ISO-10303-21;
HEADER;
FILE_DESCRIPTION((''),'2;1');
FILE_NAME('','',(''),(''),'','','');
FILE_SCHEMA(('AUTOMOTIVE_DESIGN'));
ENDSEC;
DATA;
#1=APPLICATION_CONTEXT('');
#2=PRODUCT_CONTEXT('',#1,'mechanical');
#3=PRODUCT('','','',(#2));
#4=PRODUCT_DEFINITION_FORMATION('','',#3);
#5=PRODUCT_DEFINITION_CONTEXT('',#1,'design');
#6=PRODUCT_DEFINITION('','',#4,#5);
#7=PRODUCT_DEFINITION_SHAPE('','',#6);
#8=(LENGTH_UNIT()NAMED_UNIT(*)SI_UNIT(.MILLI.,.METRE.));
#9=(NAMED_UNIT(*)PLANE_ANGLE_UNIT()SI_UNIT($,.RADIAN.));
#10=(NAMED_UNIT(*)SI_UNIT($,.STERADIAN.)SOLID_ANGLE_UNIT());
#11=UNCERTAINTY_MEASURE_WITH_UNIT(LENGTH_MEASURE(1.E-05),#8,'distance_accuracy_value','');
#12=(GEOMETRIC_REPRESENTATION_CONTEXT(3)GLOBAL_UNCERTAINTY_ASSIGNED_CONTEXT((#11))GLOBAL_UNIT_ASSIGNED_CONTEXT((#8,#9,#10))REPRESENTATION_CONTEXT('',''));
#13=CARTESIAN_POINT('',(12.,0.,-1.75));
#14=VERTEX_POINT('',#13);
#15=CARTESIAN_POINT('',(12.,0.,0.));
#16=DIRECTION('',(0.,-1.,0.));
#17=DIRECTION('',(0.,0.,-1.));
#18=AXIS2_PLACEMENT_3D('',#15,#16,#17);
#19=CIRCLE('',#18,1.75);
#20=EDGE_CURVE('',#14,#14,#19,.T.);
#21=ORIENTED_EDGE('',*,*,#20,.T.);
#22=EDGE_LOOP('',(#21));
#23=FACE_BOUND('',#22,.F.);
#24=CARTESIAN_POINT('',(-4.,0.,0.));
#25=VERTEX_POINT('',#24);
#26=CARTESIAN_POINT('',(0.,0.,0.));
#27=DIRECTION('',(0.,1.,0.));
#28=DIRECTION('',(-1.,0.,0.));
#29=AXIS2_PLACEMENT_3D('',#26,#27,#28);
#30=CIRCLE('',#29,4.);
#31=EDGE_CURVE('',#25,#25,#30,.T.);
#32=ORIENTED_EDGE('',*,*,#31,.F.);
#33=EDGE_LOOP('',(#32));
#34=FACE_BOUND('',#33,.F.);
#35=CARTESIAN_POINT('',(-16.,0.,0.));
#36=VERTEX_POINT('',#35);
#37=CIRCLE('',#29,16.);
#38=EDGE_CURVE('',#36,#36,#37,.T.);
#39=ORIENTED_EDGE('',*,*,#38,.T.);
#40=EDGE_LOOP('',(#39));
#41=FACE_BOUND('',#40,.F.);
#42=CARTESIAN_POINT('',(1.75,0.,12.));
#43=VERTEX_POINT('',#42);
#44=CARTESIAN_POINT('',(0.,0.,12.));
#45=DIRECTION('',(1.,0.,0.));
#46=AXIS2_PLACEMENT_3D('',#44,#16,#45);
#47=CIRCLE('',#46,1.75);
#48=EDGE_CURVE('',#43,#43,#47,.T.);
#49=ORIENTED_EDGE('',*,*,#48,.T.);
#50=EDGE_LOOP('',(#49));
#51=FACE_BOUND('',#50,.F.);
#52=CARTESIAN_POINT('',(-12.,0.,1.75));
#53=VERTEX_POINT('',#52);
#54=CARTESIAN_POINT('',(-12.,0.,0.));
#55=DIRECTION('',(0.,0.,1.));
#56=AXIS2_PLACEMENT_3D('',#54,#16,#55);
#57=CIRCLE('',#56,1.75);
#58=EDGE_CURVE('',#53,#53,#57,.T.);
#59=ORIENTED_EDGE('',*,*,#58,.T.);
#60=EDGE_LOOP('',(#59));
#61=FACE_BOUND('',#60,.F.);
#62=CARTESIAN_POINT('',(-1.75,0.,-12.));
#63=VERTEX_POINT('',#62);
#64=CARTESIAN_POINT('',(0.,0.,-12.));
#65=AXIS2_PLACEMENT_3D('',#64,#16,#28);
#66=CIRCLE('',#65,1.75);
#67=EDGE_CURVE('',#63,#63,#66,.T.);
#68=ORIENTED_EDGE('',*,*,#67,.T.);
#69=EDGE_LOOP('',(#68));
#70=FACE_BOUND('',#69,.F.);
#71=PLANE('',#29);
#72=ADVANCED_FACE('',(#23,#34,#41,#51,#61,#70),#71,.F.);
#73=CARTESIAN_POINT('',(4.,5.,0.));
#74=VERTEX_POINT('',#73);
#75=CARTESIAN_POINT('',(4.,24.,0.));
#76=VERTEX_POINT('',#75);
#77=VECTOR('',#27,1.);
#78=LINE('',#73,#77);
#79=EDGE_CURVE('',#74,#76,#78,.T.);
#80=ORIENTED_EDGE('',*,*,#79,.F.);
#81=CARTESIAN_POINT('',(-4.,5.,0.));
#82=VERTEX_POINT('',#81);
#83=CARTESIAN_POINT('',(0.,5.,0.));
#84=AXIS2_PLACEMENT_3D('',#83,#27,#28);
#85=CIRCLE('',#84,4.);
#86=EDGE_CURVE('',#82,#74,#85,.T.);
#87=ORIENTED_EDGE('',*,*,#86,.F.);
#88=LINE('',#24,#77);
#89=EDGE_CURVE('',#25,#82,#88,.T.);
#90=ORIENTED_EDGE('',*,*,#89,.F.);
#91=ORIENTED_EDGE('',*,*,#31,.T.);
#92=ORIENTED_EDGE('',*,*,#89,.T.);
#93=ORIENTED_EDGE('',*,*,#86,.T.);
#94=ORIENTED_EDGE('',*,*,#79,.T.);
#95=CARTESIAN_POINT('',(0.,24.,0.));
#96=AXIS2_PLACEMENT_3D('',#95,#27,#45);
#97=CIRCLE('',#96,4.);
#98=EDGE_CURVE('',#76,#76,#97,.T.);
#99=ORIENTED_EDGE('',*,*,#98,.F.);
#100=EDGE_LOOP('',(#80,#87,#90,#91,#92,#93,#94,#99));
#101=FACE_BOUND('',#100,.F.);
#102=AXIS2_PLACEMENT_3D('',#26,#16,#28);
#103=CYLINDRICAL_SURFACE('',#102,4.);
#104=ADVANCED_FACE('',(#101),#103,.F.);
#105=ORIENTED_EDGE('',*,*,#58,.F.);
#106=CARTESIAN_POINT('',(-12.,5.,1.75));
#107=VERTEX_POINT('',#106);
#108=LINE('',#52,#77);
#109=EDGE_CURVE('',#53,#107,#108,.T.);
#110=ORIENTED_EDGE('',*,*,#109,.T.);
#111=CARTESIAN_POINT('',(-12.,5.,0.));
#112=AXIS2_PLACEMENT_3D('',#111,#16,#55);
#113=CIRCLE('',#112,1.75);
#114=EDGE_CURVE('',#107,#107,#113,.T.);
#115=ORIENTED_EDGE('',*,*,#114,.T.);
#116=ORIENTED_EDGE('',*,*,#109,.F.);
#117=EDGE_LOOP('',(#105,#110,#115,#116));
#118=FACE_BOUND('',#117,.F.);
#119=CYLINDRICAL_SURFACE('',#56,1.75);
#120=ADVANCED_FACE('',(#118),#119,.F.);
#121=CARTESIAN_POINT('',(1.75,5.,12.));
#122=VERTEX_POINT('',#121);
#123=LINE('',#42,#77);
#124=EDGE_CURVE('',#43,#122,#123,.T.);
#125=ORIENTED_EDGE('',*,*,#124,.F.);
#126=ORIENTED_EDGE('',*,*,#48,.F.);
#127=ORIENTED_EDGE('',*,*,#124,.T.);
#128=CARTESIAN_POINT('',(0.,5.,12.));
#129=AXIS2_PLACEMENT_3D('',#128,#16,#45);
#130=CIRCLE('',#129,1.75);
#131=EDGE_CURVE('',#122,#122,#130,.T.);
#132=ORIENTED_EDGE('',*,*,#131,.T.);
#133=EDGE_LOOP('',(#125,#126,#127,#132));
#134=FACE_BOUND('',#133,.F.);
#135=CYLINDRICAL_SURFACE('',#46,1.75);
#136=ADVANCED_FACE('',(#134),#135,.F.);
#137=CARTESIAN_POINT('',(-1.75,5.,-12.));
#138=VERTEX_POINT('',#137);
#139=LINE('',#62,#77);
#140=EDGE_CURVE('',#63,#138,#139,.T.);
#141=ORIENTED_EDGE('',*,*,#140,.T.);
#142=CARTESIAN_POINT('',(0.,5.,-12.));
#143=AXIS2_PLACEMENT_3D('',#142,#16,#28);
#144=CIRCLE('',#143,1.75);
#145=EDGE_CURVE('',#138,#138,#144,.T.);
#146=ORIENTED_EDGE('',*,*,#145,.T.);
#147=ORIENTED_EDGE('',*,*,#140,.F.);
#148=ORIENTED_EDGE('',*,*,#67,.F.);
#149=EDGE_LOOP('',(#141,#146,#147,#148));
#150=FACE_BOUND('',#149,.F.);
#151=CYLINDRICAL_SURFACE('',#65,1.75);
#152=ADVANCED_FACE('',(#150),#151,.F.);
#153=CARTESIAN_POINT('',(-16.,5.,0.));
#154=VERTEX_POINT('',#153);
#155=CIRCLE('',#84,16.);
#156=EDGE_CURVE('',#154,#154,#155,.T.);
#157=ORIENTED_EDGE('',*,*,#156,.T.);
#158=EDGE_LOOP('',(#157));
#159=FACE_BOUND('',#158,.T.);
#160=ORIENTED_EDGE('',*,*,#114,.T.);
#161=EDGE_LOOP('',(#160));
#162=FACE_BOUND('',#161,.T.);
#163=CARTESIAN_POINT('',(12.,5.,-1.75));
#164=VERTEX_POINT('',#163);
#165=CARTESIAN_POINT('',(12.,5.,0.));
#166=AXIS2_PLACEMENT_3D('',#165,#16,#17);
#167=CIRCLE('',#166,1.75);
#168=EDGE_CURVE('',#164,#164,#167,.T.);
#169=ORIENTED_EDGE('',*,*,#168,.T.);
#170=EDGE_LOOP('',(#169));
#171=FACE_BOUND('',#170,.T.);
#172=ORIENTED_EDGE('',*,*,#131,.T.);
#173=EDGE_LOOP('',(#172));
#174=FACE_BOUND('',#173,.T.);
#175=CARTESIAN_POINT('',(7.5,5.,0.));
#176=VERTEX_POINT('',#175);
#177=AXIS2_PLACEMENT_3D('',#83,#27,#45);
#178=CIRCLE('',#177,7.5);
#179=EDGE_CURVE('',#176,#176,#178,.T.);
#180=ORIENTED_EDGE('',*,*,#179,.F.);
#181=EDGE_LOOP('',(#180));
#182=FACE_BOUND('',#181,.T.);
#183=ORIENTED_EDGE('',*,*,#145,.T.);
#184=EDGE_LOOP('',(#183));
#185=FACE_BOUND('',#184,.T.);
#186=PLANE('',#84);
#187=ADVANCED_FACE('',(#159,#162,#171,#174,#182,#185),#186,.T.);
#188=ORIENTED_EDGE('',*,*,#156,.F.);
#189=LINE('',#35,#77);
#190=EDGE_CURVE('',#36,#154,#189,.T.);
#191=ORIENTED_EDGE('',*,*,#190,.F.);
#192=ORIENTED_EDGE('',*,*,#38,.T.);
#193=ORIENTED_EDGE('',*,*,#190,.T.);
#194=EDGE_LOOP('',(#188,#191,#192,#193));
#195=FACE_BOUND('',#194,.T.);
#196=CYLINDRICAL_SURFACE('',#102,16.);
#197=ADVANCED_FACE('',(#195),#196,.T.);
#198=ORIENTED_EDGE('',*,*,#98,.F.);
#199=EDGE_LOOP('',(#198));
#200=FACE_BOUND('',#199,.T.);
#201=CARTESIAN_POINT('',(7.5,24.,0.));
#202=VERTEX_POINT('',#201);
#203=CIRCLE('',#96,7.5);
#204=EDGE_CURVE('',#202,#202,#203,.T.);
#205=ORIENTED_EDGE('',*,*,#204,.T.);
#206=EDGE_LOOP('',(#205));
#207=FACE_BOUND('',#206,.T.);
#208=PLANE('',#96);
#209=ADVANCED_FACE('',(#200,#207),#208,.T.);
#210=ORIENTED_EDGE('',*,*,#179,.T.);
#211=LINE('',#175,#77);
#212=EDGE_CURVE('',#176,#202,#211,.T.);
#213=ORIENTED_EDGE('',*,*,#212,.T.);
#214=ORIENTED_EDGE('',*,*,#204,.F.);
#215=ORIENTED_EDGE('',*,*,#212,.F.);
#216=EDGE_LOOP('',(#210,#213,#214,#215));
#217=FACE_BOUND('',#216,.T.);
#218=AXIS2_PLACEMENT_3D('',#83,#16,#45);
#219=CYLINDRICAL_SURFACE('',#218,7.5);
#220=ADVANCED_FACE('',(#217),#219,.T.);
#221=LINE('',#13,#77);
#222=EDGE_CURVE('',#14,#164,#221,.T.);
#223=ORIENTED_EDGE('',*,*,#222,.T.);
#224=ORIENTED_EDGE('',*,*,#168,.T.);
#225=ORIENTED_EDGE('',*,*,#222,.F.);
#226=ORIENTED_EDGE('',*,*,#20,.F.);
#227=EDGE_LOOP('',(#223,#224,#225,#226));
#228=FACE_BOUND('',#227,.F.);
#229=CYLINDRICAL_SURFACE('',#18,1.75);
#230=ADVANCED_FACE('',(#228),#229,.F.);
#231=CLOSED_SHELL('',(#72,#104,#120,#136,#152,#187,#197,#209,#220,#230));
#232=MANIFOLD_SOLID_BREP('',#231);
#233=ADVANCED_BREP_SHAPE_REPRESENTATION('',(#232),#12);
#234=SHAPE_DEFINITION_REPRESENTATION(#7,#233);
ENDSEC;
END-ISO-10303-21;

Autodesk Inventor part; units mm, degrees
ref_plane "YZ Plane" through (0, 0, 0) normal (1, 0, 0) x (0, 1, 0)
ref_plane "XZ Plane" through (0, 0, 0) normal (0, 1, 0) x (-1, 0, 0)
ref_plane "XY Plane" through (0, 0, 0) normal (0, 0, 1) x (1, 0, 0)
sketch "Sketch1" plane through (0, 0, 0) normal (0, 1, 0) x (-1, 0, 0)
  circle A0 centre (0, 0) radius 4
  circle A1 centre (0, 0) radius 16
  dimension "d0" = 8
  dimension "d1" = 32
extrude "Extrusion1" add sketch "Sketch1" along normal blind 5
sketch "Sketch2" plane through (0, 5, 0) normal (0, 1, 0) x (1, 0, 0)
  circle A0 centre (0, 0) radius 4
  circle A1 centre (0, 0) radius 7.5
  dimension "d4" = 15
extrude "Extrusion2" add sketch "Sketch2" along normal blind 19
sketch "Sketch3" plane through (0, 0, 0) normal (0, -1, 0) x (1, 0, 0)
  point P0 (0, 0)
sketch "Sketch4" plane through (0, 0, 0) normal (0, -1, 0) x (1, 0, 0)
  circle A0 centre (0, 12) radius 1.75
  point P0 (0, 0)
  dimension "d8" = 3.5
extrude "Extrusion3" cut sketch "Sketch4" against normal blind 19
pattern_circular "Circular Pattern1" count 4 over 360 about axis through (0, -10, 0) along (0, 1, 0) of "Extrusion3"
properties part number "Soporte Eje"
